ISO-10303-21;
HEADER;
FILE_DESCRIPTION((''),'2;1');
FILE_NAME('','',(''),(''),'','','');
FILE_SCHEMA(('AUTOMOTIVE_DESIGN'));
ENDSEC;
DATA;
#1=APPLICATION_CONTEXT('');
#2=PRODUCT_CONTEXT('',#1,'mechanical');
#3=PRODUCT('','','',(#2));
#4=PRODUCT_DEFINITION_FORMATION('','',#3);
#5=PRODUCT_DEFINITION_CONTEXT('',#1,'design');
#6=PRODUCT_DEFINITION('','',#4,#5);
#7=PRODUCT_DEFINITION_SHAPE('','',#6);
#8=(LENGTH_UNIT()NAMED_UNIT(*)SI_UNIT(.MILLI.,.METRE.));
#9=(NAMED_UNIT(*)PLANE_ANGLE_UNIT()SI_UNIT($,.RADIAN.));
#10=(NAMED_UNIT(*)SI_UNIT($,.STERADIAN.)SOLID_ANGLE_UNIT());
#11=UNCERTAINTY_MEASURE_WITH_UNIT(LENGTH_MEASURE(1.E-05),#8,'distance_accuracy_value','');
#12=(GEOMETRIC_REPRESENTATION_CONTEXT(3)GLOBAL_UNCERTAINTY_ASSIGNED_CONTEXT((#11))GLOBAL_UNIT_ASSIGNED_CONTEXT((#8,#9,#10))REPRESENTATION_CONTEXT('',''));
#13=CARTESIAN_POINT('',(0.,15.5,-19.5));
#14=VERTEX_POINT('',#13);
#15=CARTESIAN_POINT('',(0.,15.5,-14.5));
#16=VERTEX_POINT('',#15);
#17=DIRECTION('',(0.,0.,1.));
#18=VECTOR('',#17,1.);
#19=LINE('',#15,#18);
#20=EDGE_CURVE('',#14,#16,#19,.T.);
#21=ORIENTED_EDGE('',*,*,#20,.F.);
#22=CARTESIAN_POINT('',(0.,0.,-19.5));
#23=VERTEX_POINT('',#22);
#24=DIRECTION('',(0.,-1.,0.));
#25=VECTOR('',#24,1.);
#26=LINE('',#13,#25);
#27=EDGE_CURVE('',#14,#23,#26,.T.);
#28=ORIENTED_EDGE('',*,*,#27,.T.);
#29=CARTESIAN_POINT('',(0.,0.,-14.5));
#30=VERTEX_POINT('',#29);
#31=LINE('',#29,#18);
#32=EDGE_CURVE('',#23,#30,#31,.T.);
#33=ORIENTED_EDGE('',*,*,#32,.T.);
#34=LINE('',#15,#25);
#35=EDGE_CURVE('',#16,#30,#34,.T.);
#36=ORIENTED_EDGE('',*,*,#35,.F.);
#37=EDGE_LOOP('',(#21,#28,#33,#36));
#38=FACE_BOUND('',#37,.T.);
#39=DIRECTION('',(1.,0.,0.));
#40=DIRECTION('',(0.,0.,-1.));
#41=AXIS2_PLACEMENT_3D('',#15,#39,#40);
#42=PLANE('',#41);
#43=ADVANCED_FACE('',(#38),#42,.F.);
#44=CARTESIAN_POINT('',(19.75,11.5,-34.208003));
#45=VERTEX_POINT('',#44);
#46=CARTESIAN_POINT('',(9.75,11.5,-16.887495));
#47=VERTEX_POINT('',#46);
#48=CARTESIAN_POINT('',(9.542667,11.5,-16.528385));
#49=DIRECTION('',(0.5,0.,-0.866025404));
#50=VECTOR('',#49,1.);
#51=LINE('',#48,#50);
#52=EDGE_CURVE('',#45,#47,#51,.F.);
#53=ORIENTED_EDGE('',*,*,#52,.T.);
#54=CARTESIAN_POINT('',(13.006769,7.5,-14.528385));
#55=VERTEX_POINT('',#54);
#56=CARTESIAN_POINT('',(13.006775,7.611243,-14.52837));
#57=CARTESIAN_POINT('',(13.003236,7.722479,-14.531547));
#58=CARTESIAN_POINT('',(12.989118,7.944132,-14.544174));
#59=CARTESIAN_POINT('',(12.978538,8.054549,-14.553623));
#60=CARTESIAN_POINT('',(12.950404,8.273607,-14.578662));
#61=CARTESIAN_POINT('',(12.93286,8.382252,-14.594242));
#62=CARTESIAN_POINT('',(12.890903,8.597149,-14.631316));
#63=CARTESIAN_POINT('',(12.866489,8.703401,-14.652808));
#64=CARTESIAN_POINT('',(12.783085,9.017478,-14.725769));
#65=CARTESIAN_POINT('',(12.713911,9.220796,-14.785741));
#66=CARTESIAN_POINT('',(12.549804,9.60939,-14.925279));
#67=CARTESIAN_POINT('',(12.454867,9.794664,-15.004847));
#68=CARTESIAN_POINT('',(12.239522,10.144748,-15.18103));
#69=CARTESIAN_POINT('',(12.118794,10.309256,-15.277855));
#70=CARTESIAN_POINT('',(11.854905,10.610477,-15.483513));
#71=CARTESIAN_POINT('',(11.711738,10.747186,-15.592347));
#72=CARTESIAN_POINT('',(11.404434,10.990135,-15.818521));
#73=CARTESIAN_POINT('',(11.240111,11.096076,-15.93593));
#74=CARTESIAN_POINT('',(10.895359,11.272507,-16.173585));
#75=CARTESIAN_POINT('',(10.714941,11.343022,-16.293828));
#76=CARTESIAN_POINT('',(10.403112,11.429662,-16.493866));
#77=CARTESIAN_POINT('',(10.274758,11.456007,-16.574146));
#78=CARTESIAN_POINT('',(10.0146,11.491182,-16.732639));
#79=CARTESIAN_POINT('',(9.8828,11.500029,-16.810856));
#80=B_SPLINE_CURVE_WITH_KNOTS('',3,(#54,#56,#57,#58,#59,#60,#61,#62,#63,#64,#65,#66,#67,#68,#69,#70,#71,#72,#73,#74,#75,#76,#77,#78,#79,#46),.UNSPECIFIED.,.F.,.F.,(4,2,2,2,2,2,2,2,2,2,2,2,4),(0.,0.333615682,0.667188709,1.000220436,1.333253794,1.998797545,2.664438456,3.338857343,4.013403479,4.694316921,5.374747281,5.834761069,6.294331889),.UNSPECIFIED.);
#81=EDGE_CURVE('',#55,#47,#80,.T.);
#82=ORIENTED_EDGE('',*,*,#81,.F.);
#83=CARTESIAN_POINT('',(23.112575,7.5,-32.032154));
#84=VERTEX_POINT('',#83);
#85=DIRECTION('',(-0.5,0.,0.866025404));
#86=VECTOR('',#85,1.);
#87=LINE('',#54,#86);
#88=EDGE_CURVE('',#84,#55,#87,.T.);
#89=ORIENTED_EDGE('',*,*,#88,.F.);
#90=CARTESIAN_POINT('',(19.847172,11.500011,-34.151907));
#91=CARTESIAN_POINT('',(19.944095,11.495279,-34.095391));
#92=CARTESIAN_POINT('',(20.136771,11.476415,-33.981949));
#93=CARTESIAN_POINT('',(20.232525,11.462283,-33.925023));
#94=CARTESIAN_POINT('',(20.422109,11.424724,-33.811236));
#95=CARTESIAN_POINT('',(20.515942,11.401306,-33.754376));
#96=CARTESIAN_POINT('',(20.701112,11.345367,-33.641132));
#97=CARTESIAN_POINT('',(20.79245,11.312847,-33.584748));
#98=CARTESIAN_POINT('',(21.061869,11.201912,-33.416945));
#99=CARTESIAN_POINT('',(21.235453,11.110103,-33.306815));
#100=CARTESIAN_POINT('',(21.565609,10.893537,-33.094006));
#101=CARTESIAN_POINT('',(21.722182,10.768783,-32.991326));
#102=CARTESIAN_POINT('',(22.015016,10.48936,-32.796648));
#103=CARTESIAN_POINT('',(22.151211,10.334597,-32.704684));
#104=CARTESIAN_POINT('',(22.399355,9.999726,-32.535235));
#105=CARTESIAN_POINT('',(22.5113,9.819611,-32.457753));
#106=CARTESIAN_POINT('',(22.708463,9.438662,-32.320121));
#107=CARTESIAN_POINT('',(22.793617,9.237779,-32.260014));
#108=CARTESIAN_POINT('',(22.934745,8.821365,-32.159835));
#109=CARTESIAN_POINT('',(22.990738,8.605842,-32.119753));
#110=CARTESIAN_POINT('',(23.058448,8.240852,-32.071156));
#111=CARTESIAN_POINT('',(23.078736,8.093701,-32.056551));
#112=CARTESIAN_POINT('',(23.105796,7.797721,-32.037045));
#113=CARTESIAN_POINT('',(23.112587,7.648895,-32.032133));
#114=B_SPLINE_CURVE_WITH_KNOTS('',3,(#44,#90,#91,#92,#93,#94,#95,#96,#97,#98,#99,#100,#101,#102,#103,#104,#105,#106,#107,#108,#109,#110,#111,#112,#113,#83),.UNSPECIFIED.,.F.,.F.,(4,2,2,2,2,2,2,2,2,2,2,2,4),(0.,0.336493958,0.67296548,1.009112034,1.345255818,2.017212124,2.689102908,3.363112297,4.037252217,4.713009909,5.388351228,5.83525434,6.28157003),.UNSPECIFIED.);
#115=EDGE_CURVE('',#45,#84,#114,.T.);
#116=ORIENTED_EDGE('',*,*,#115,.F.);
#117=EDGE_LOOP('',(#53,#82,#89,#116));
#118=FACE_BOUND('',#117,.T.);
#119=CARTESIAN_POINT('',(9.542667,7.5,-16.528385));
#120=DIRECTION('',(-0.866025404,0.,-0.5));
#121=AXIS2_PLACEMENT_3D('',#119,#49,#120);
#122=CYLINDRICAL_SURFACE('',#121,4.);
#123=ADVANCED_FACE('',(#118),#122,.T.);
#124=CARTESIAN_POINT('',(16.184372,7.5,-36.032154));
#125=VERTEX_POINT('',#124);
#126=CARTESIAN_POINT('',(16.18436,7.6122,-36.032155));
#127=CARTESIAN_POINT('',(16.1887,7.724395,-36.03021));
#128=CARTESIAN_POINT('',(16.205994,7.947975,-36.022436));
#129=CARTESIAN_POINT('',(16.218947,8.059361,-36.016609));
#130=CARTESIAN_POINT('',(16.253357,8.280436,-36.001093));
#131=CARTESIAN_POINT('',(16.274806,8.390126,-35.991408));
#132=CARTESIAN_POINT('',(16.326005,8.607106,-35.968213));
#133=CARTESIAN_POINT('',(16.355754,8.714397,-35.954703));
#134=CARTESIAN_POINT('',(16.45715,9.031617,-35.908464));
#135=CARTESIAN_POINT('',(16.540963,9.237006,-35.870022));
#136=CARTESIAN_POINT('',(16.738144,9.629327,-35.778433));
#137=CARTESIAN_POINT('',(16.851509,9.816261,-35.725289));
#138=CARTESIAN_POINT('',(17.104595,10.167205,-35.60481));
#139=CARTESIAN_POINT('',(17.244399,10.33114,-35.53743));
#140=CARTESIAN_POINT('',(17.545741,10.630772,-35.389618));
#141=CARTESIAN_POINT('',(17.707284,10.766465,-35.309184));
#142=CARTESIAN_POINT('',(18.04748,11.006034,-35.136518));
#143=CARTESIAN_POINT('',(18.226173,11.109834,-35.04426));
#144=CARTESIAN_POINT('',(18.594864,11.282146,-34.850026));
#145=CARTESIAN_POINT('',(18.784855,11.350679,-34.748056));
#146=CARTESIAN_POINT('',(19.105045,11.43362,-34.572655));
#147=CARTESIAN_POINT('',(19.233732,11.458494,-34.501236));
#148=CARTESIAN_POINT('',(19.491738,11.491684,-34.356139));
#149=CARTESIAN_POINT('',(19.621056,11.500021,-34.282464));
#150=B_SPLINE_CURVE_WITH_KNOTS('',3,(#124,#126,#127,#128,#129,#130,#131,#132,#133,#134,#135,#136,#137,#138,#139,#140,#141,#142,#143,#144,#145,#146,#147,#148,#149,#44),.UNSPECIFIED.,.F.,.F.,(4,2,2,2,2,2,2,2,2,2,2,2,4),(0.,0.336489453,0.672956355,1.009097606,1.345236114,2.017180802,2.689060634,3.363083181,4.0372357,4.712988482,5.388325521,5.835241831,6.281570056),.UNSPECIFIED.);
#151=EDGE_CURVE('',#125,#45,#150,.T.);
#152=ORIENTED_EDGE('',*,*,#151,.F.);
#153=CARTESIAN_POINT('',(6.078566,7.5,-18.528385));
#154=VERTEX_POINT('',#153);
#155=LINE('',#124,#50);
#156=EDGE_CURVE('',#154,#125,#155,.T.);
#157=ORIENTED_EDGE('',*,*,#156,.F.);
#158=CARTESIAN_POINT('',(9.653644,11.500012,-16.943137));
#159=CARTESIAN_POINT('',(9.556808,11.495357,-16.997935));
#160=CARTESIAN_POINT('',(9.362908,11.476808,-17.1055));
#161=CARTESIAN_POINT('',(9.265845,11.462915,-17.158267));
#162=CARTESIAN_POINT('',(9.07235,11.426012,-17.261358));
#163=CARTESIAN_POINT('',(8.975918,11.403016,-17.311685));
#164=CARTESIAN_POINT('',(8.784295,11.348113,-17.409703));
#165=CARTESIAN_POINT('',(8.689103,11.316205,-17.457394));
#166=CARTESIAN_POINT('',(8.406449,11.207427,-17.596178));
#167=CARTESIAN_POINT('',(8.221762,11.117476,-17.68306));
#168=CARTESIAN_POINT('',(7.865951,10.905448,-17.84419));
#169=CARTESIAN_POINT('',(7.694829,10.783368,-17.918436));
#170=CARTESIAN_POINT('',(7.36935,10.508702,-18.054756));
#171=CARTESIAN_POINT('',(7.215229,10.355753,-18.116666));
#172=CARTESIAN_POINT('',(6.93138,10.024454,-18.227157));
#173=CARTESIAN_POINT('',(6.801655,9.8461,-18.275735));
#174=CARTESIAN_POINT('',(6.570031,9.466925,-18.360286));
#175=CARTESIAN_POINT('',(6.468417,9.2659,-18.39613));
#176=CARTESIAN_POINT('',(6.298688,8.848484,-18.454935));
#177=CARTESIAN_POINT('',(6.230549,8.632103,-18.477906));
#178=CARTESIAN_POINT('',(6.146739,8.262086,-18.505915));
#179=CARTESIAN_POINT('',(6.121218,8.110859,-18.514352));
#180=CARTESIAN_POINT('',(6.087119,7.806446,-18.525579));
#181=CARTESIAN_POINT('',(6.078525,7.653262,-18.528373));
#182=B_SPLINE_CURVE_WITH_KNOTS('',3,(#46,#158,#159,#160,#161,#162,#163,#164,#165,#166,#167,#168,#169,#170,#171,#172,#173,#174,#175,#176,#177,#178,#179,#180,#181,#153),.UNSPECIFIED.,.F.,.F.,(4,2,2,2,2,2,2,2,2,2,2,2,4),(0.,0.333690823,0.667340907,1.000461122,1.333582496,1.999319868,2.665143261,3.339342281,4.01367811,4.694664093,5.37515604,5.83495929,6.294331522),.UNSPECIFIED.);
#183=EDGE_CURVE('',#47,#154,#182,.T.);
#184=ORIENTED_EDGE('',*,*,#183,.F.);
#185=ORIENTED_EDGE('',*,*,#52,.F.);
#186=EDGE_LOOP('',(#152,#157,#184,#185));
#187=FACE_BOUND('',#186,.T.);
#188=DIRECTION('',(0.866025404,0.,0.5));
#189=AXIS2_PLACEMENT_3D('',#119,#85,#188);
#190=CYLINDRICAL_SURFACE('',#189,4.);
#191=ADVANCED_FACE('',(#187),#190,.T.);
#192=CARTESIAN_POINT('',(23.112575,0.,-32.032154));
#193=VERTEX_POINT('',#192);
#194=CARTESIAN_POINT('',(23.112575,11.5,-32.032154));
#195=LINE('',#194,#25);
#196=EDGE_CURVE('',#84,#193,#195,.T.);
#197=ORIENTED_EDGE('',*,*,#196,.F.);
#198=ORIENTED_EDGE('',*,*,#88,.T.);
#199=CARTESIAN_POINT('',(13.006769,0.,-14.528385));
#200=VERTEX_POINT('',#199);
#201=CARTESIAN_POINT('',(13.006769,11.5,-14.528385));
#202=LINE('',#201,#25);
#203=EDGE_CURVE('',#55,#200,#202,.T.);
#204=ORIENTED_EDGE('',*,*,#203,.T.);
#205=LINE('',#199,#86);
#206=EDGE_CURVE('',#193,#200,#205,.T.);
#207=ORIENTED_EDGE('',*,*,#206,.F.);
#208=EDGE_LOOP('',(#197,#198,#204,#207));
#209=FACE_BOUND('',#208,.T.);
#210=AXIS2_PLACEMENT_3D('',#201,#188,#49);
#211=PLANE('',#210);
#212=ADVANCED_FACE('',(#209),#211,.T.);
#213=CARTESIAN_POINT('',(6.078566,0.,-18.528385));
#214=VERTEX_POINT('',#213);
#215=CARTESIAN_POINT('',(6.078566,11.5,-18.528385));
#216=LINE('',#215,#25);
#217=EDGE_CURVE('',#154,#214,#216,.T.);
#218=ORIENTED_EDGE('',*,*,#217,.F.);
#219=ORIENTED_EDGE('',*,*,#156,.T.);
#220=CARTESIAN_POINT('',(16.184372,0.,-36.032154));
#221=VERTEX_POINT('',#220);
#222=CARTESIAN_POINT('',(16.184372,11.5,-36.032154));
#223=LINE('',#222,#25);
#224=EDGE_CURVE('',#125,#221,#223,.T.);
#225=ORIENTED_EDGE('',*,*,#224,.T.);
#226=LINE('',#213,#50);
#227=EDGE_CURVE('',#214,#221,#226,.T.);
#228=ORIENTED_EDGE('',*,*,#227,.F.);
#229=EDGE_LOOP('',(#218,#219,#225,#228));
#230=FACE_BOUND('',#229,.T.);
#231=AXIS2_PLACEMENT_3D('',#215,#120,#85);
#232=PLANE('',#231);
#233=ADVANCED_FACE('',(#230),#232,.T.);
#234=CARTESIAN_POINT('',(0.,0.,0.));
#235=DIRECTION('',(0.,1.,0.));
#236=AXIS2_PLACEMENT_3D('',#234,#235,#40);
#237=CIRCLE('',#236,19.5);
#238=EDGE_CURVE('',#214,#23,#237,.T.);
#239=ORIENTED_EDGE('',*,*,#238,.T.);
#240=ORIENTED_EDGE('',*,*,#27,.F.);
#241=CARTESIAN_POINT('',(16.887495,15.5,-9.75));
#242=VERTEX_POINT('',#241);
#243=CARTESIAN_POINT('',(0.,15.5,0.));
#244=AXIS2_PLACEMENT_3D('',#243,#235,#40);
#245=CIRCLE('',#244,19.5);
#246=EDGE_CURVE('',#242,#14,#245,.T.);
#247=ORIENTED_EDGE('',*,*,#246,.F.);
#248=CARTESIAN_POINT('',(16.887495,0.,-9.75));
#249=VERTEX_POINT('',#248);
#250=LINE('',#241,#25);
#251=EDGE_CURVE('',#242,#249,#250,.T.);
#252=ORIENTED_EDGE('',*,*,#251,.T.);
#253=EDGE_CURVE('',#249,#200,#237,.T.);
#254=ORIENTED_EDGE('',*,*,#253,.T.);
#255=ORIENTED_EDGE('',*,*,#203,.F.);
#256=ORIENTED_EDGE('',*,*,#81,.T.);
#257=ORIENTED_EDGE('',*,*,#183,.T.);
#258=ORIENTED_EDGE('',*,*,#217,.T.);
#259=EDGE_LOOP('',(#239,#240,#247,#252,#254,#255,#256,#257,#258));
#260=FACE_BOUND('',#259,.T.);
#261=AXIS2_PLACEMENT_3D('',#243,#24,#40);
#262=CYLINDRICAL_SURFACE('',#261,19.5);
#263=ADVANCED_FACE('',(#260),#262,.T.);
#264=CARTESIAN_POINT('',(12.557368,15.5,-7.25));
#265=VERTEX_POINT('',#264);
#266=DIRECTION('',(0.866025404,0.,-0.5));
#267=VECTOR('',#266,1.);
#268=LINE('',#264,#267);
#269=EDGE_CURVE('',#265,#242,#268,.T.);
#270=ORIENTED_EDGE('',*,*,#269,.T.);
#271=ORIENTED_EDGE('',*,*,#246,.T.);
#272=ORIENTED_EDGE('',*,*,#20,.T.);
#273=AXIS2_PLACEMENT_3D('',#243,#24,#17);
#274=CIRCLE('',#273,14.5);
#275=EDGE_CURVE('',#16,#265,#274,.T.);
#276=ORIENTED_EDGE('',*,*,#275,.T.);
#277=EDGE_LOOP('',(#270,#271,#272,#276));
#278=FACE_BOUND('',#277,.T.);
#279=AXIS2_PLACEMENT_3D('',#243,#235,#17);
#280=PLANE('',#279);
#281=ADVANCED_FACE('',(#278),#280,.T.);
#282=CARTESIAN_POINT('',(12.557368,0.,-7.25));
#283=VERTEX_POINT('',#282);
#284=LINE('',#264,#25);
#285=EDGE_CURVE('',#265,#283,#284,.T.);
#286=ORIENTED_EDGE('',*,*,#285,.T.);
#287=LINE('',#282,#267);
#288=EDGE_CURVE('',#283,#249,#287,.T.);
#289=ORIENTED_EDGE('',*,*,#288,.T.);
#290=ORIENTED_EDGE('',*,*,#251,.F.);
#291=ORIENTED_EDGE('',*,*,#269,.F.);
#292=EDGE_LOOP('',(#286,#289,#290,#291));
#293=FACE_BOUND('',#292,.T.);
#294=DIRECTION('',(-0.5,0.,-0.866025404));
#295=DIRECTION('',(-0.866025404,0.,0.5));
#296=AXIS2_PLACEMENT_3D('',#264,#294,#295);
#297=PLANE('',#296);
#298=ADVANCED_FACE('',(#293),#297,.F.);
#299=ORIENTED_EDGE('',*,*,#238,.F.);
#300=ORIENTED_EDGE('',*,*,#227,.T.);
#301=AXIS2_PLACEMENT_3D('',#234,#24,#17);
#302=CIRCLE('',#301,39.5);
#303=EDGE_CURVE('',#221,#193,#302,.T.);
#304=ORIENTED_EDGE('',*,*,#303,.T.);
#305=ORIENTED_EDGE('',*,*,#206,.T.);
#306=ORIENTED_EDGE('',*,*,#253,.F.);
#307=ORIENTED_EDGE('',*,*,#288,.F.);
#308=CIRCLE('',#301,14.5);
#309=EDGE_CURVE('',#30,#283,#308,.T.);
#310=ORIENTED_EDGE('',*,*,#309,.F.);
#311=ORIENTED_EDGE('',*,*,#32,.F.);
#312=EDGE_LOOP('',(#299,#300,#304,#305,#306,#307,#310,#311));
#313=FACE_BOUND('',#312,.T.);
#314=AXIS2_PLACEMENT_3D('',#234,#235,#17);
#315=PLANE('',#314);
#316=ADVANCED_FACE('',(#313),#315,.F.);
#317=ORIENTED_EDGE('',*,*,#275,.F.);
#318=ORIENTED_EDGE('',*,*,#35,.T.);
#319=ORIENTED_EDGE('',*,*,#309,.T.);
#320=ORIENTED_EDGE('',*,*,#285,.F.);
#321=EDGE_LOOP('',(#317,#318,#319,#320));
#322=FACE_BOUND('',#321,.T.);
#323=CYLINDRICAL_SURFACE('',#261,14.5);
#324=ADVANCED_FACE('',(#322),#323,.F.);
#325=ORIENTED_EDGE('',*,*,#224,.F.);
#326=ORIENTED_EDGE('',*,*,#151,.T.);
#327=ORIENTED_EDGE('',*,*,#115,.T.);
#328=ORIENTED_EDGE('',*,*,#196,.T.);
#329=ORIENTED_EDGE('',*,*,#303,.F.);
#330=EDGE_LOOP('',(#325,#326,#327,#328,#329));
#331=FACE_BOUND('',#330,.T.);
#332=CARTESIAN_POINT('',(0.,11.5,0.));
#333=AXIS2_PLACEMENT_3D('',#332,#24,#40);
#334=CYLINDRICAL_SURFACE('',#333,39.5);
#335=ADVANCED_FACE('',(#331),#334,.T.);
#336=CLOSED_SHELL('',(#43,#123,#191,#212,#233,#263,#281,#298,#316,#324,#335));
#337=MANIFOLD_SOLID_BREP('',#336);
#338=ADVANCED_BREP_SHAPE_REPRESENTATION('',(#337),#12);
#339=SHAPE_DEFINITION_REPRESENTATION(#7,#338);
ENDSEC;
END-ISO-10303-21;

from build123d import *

# Parameters (mm, degrees)
BOSS_EXTRUDE1_DEPTH = 15.5
BOSS_EXTRUDE2_DEPTH = 11.5
FILLET1_R           = 4


with BuildPart() as part:
    # Sketch3 → Boss-Extrude1 (new body)
    with BuildSketch(Plane(origin=(0, 0, 0), x_dir=(1, 0, 0), z_dir=(0, 1, 0))):
        with BuildLine():
            Line((0, 14.5), (0, 19.5))
            ThreePointArc((0, 19.5), (9.75, 16.887495374), (16.887495374, 9.75))
            Line((16.887495374, 9.75), (12.557368355, 7.25))
            ThreePointArc((12.557368355, 7.25), (7.25, 12.557368355), (0, 14.5))
        make_face()
    extrude(amount=BOSS_EXTRUDE1_DEPTH)

    # Sketch5 → Boss-Extrude2 (add)
    with BuildSketch(Plane.XZ):
        with BuildLine():
            Line((6.078565727, -18.528384676), (16.184371608, -36.032153914))
            ThreePointArc((16.184371608, -36.032153914), (19.75, -34.208003449), (23.112574838, -32.032153914))
            Line((23.112574838, -32.032153914), (13.006768957, -14.528384676))
            ThreePointArc((13.006768957, -14.528384676), (9.75, -16.887495374), (6.078565727, -18.528384676))
        make_face()
    extrude(amount=-BOSS_EXTRUDE2_DEPTH)

    # Fillet1
    # the kernel refuses this fillet: 4 mm, written as the material it takes off along each edge
    with BuildSketch(Plane(origin=(28.112574838, 11.5, -40.692407951), x_dir=(-0.8660254037844415, 0, -0.4999999999999951), z_dir=(-0.49999999999999506, 0, 0.8660254037844415))) as fillet1_piece_1_section:
        with BuildLine():
            CenterArc((FILLET1_R, FILLET1_R), FILLET1_R, 180, 90)
            Line((0, FILLET1_R), (0, 0))
            Line((0, 0), (FILLET1_R, 0))
        make_face()
    fillet1_piece_1 = extrude(amount=40.211611762, mode=Mode.PRIVATE)
    fillet1_piece_1 = fillet1_piece_1 - Plane(origin=(0, 10.592283231, 0), x_dir=(0, 0, -1), z_dir=(0, -1, 0)) * Cylinder(19.5, 97, mode=Mode.PRIVATE)
    add(fillet1_piece_1, mode=Mode.SUBTRACT)
    with BuildSketch(Plane(origin=(1.078565727, 11.5, -9.868130638), x_dir=(0, -1, 0), z_dir=(0.49999999999999506, 0, -0.8660254037844415))) as fillet1_piece_2_section:
        with BuildLine():
            CenterArc((FILLET1_R, -FILLET1_R), FILLET1_R, 90, 90)
            Line((0, -FILLET1_R), (0, 0))
            Line((0, 0), (FILLET1_R, 0))
        make_face()
    fillet1_piece_2 = extrude(amount=40.211611762, mode=Mode.PRIVATE)
    fillet1_piece_2 = fillet1_piece_2 - Plane(origin=(0, 10.592276743, 0), x_dir=(0, 0, -1), z_dir=(0, -1, 0)) * Cylinder(19.5, 97, mode=Mode.PRIVATE)
    add(fillet1_piece_2, mode=Mode.SUBTRACT)


solid = part.part
